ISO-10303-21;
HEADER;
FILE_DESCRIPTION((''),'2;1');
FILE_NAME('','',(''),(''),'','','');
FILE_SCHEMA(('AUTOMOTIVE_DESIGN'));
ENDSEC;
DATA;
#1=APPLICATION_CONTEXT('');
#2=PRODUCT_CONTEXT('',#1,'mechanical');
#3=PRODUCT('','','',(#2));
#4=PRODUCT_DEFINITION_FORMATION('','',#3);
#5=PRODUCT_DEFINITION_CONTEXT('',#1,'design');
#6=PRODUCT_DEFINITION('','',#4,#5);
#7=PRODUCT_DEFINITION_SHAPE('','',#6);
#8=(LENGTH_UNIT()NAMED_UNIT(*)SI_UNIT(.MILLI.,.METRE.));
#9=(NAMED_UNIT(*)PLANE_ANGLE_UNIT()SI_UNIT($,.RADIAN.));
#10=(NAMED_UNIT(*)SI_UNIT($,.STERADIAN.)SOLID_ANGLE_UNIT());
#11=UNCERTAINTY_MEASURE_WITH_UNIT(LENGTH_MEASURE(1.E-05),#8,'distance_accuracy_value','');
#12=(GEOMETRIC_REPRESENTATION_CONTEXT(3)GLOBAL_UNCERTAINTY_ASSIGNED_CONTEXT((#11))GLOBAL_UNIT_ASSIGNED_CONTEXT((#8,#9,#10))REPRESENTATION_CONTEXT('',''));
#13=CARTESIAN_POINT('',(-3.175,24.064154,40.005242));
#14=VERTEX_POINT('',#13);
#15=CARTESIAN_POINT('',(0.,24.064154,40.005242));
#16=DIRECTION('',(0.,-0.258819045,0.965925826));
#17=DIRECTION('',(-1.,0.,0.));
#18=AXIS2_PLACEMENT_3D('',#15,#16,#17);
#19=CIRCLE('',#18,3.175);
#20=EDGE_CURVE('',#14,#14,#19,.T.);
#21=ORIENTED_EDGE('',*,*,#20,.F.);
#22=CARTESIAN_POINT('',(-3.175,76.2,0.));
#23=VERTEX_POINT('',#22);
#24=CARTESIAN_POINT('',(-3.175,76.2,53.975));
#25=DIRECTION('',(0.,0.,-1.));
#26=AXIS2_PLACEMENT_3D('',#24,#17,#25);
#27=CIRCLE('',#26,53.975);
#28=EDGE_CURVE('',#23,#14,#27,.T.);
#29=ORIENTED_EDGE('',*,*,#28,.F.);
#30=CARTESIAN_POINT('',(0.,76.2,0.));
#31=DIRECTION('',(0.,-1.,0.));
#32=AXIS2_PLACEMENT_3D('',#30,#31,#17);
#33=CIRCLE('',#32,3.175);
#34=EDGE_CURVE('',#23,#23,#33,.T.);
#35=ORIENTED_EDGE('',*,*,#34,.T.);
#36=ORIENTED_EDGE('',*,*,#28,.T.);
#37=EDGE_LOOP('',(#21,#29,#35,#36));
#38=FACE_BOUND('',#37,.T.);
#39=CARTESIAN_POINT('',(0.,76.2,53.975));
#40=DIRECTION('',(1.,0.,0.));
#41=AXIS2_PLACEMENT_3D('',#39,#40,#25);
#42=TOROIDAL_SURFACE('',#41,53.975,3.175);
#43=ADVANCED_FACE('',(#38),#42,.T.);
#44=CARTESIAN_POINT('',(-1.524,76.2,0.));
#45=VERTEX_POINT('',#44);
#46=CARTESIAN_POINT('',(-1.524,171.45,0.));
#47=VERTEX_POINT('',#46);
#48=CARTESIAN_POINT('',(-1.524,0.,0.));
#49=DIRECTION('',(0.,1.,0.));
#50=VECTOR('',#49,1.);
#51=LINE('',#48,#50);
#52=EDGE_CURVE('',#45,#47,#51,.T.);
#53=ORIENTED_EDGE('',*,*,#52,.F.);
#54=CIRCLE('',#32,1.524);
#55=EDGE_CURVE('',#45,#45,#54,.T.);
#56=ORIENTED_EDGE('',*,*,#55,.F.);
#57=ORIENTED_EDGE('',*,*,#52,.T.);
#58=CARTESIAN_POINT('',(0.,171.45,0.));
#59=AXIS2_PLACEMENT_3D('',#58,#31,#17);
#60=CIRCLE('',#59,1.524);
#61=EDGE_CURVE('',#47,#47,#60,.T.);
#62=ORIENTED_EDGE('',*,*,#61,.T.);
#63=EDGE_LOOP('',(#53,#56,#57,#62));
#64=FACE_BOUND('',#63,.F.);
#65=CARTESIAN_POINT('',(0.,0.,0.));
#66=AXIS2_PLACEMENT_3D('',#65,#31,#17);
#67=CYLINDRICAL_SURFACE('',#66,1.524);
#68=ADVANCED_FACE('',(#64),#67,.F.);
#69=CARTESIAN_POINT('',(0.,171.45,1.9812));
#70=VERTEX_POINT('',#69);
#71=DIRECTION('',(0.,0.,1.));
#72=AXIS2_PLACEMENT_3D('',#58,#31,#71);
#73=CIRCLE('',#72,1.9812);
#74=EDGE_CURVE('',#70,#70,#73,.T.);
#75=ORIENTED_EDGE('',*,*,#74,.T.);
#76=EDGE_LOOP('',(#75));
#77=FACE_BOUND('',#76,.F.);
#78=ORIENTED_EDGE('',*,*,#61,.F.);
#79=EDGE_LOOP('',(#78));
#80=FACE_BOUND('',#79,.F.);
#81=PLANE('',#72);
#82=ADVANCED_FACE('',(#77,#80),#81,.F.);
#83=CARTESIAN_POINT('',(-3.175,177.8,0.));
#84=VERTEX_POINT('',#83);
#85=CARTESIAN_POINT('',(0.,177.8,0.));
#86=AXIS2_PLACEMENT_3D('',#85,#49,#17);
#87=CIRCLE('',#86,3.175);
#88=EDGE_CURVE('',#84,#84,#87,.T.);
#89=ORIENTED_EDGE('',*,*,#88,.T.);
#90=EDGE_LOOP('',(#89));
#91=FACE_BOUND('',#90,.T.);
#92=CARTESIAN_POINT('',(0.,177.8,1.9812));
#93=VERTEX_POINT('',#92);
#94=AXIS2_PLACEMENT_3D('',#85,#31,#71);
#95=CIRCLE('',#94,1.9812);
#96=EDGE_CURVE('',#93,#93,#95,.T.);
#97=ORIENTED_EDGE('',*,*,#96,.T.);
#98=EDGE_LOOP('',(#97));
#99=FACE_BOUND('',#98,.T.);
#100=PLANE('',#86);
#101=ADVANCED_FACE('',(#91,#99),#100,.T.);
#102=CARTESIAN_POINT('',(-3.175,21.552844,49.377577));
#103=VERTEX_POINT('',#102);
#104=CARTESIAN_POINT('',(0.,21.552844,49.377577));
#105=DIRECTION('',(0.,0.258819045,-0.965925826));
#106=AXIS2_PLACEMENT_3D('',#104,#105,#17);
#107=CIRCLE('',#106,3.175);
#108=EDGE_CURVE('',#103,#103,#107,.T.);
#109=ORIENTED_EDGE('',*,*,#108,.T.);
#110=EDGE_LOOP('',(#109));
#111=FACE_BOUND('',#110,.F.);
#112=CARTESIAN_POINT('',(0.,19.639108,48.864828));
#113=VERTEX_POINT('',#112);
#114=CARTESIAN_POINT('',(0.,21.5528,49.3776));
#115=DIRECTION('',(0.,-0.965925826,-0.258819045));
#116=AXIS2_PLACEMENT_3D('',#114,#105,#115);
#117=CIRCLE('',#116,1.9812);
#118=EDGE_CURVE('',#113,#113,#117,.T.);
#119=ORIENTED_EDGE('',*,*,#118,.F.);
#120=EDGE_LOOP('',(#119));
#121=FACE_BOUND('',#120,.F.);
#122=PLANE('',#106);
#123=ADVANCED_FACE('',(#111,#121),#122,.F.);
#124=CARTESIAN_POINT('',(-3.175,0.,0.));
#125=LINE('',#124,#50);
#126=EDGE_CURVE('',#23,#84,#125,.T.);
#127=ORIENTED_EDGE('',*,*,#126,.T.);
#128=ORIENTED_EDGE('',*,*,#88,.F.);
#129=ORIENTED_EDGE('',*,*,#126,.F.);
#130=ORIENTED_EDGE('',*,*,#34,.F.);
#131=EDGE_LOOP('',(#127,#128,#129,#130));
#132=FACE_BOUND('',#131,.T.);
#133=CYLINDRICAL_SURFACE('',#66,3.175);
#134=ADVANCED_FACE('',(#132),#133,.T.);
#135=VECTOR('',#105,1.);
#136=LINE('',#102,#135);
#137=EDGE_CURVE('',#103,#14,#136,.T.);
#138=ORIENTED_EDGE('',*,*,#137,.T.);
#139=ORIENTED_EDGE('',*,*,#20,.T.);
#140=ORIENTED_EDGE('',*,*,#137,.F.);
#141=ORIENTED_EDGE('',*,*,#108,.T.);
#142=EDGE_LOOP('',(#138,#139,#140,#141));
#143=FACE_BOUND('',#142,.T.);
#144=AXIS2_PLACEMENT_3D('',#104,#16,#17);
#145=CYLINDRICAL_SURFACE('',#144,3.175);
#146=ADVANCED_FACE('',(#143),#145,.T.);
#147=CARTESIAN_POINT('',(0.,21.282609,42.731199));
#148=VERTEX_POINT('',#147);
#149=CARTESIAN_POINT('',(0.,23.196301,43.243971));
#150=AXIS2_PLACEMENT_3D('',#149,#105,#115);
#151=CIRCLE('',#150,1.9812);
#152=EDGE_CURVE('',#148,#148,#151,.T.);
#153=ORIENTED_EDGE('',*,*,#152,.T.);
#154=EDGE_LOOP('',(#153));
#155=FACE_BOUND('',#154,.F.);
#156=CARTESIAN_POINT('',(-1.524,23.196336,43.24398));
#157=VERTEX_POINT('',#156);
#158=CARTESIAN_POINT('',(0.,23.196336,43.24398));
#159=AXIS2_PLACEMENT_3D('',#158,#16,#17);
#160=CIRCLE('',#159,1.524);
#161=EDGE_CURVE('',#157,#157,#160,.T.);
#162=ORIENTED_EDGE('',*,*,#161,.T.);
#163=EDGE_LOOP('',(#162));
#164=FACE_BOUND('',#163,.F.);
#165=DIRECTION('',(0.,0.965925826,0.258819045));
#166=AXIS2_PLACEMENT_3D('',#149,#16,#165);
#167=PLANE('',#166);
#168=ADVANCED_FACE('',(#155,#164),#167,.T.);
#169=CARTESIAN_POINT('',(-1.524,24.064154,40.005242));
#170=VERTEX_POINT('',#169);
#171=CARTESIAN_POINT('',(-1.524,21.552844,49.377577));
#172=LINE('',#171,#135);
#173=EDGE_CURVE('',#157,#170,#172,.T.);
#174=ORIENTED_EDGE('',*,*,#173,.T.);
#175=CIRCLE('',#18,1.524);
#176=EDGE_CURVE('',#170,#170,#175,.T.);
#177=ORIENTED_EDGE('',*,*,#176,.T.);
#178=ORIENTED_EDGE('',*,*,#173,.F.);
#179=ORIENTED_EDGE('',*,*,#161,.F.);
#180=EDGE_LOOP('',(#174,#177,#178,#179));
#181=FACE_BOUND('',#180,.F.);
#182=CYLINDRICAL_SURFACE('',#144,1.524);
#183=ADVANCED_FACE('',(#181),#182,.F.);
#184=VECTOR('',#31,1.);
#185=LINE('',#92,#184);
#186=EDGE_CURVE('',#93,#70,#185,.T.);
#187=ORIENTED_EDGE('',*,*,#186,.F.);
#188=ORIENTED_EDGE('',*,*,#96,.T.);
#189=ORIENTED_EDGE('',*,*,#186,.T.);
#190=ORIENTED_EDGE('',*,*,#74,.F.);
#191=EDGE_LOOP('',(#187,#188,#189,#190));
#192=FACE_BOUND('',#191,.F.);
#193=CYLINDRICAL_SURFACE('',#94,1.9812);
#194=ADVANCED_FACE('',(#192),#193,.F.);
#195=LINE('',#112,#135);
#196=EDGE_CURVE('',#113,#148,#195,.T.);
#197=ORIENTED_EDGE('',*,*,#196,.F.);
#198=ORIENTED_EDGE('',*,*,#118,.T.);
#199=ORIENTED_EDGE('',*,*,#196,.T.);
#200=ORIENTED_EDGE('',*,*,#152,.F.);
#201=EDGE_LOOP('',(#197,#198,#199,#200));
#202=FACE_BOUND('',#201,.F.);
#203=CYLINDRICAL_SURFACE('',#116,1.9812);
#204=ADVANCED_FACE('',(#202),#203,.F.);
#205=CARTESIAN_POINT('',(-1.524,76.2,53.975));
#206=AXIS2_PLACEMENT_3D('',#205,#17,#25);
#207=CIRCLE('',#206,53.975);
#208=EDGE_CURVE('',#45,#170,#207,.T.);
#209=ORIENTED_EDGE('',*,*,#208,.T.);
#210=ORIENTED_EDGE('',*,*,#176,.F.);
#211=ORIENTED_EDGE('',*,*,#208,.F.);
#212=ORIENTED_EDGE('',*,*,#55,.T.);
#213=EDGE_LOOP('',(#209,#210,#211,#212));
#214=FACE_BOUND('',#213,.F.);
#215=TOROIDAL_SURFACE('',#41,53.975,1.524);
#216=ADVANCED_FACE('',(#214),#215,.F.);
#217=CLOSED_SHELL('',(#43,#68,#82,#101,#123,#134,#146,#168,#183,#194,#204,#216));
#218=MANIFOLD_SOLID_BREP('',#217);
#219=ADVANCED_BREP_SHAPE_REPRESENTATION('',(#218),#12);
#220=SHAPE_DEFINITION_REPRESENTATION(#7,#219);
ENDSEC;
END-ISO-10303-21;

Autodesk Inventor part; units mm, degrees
ref_plane "YZ Plane" through (0, 0, 0) normal (1, 0, 0) x (0, 1, 0)
ref_plane "XZ Plane" through (0, 0, 0) normal (0, 1, 0) x (-1, 0, 0)
sketch "Sketch1" plane through (0, 0, 0) normal (0, 1, 0) x (-1, 0, 0)
  circle A0 centre (0, 0) radius 3.175
  circle A1 centre (0, 0) radius 1.524
  dimension "d0" = 6.35
  dimension "d1" = 3.048
extrude "Extrusion1" add sketch "Sketch1" along normal blind 177.8
sketch "Sketch2" plane through (0, 177.8, 0) normal (0, 1, 0) x (1, 0, 0)
  point P0 (0, 0)
sketch "Sketch3" plane through (0, 177.8, 0) normal (0, 1, 0) x (1, 0, 0)
  point P0 (0, 0)
ref_plane "Work Plane1" through (0, 0, 3.175) normal (0, 0, 1) x (1, 0, 0)
sketch "Sketch4" plane through (0, 0, 3.175) normal (0, 0, 1) x (1, 0, 0)
  line L0 (-15.875, 25.4) -> (22.225, 25.4)
  line L1 (-15.8266, 76.2) -> (22.2734, 76.2)
  point P0 (0, 0)
  dimension "d4" = 38.1
  dimension "d5" = 25.4
  dimension "d6" = 38.1
  dimension "d7" = 76.2
bend part "Bend Part1" radius 50.8 angle 75 line through (-15.8266, 76.2, 3.175) along (1, 0, 0) centre toward (0, 0, 1) moving side (0, -1, 0) both sides no
hole "Hole1" at (0, 177.8, 0) direction (0, -1, 0) diameter 3.9624 depth 6.35 thread size "10-32 UNF" class "2B" standard "ANSI Unified Screw Threads"
sketch "Sketch8" plane through (0, 21.5528, 49.3776) normal (0, -0.258819, 0.9659258) x (1, 0, 0)
  circle A0 centre (0, 0) radius 3.175 projected
  circle A1 centre (0, 0) radius 1.524
  point P0 (0, -33.5983)
hole "Hole4" at (0, 21.5528, 49.3776) direction (0, 0.258819, -0.9659258) diameter 3.9624 depth 6.35 thread size "10-32 UNF" class "2B" standard "ANSI Unified Screw Threads"
properties part number "Stainless steel tube"
